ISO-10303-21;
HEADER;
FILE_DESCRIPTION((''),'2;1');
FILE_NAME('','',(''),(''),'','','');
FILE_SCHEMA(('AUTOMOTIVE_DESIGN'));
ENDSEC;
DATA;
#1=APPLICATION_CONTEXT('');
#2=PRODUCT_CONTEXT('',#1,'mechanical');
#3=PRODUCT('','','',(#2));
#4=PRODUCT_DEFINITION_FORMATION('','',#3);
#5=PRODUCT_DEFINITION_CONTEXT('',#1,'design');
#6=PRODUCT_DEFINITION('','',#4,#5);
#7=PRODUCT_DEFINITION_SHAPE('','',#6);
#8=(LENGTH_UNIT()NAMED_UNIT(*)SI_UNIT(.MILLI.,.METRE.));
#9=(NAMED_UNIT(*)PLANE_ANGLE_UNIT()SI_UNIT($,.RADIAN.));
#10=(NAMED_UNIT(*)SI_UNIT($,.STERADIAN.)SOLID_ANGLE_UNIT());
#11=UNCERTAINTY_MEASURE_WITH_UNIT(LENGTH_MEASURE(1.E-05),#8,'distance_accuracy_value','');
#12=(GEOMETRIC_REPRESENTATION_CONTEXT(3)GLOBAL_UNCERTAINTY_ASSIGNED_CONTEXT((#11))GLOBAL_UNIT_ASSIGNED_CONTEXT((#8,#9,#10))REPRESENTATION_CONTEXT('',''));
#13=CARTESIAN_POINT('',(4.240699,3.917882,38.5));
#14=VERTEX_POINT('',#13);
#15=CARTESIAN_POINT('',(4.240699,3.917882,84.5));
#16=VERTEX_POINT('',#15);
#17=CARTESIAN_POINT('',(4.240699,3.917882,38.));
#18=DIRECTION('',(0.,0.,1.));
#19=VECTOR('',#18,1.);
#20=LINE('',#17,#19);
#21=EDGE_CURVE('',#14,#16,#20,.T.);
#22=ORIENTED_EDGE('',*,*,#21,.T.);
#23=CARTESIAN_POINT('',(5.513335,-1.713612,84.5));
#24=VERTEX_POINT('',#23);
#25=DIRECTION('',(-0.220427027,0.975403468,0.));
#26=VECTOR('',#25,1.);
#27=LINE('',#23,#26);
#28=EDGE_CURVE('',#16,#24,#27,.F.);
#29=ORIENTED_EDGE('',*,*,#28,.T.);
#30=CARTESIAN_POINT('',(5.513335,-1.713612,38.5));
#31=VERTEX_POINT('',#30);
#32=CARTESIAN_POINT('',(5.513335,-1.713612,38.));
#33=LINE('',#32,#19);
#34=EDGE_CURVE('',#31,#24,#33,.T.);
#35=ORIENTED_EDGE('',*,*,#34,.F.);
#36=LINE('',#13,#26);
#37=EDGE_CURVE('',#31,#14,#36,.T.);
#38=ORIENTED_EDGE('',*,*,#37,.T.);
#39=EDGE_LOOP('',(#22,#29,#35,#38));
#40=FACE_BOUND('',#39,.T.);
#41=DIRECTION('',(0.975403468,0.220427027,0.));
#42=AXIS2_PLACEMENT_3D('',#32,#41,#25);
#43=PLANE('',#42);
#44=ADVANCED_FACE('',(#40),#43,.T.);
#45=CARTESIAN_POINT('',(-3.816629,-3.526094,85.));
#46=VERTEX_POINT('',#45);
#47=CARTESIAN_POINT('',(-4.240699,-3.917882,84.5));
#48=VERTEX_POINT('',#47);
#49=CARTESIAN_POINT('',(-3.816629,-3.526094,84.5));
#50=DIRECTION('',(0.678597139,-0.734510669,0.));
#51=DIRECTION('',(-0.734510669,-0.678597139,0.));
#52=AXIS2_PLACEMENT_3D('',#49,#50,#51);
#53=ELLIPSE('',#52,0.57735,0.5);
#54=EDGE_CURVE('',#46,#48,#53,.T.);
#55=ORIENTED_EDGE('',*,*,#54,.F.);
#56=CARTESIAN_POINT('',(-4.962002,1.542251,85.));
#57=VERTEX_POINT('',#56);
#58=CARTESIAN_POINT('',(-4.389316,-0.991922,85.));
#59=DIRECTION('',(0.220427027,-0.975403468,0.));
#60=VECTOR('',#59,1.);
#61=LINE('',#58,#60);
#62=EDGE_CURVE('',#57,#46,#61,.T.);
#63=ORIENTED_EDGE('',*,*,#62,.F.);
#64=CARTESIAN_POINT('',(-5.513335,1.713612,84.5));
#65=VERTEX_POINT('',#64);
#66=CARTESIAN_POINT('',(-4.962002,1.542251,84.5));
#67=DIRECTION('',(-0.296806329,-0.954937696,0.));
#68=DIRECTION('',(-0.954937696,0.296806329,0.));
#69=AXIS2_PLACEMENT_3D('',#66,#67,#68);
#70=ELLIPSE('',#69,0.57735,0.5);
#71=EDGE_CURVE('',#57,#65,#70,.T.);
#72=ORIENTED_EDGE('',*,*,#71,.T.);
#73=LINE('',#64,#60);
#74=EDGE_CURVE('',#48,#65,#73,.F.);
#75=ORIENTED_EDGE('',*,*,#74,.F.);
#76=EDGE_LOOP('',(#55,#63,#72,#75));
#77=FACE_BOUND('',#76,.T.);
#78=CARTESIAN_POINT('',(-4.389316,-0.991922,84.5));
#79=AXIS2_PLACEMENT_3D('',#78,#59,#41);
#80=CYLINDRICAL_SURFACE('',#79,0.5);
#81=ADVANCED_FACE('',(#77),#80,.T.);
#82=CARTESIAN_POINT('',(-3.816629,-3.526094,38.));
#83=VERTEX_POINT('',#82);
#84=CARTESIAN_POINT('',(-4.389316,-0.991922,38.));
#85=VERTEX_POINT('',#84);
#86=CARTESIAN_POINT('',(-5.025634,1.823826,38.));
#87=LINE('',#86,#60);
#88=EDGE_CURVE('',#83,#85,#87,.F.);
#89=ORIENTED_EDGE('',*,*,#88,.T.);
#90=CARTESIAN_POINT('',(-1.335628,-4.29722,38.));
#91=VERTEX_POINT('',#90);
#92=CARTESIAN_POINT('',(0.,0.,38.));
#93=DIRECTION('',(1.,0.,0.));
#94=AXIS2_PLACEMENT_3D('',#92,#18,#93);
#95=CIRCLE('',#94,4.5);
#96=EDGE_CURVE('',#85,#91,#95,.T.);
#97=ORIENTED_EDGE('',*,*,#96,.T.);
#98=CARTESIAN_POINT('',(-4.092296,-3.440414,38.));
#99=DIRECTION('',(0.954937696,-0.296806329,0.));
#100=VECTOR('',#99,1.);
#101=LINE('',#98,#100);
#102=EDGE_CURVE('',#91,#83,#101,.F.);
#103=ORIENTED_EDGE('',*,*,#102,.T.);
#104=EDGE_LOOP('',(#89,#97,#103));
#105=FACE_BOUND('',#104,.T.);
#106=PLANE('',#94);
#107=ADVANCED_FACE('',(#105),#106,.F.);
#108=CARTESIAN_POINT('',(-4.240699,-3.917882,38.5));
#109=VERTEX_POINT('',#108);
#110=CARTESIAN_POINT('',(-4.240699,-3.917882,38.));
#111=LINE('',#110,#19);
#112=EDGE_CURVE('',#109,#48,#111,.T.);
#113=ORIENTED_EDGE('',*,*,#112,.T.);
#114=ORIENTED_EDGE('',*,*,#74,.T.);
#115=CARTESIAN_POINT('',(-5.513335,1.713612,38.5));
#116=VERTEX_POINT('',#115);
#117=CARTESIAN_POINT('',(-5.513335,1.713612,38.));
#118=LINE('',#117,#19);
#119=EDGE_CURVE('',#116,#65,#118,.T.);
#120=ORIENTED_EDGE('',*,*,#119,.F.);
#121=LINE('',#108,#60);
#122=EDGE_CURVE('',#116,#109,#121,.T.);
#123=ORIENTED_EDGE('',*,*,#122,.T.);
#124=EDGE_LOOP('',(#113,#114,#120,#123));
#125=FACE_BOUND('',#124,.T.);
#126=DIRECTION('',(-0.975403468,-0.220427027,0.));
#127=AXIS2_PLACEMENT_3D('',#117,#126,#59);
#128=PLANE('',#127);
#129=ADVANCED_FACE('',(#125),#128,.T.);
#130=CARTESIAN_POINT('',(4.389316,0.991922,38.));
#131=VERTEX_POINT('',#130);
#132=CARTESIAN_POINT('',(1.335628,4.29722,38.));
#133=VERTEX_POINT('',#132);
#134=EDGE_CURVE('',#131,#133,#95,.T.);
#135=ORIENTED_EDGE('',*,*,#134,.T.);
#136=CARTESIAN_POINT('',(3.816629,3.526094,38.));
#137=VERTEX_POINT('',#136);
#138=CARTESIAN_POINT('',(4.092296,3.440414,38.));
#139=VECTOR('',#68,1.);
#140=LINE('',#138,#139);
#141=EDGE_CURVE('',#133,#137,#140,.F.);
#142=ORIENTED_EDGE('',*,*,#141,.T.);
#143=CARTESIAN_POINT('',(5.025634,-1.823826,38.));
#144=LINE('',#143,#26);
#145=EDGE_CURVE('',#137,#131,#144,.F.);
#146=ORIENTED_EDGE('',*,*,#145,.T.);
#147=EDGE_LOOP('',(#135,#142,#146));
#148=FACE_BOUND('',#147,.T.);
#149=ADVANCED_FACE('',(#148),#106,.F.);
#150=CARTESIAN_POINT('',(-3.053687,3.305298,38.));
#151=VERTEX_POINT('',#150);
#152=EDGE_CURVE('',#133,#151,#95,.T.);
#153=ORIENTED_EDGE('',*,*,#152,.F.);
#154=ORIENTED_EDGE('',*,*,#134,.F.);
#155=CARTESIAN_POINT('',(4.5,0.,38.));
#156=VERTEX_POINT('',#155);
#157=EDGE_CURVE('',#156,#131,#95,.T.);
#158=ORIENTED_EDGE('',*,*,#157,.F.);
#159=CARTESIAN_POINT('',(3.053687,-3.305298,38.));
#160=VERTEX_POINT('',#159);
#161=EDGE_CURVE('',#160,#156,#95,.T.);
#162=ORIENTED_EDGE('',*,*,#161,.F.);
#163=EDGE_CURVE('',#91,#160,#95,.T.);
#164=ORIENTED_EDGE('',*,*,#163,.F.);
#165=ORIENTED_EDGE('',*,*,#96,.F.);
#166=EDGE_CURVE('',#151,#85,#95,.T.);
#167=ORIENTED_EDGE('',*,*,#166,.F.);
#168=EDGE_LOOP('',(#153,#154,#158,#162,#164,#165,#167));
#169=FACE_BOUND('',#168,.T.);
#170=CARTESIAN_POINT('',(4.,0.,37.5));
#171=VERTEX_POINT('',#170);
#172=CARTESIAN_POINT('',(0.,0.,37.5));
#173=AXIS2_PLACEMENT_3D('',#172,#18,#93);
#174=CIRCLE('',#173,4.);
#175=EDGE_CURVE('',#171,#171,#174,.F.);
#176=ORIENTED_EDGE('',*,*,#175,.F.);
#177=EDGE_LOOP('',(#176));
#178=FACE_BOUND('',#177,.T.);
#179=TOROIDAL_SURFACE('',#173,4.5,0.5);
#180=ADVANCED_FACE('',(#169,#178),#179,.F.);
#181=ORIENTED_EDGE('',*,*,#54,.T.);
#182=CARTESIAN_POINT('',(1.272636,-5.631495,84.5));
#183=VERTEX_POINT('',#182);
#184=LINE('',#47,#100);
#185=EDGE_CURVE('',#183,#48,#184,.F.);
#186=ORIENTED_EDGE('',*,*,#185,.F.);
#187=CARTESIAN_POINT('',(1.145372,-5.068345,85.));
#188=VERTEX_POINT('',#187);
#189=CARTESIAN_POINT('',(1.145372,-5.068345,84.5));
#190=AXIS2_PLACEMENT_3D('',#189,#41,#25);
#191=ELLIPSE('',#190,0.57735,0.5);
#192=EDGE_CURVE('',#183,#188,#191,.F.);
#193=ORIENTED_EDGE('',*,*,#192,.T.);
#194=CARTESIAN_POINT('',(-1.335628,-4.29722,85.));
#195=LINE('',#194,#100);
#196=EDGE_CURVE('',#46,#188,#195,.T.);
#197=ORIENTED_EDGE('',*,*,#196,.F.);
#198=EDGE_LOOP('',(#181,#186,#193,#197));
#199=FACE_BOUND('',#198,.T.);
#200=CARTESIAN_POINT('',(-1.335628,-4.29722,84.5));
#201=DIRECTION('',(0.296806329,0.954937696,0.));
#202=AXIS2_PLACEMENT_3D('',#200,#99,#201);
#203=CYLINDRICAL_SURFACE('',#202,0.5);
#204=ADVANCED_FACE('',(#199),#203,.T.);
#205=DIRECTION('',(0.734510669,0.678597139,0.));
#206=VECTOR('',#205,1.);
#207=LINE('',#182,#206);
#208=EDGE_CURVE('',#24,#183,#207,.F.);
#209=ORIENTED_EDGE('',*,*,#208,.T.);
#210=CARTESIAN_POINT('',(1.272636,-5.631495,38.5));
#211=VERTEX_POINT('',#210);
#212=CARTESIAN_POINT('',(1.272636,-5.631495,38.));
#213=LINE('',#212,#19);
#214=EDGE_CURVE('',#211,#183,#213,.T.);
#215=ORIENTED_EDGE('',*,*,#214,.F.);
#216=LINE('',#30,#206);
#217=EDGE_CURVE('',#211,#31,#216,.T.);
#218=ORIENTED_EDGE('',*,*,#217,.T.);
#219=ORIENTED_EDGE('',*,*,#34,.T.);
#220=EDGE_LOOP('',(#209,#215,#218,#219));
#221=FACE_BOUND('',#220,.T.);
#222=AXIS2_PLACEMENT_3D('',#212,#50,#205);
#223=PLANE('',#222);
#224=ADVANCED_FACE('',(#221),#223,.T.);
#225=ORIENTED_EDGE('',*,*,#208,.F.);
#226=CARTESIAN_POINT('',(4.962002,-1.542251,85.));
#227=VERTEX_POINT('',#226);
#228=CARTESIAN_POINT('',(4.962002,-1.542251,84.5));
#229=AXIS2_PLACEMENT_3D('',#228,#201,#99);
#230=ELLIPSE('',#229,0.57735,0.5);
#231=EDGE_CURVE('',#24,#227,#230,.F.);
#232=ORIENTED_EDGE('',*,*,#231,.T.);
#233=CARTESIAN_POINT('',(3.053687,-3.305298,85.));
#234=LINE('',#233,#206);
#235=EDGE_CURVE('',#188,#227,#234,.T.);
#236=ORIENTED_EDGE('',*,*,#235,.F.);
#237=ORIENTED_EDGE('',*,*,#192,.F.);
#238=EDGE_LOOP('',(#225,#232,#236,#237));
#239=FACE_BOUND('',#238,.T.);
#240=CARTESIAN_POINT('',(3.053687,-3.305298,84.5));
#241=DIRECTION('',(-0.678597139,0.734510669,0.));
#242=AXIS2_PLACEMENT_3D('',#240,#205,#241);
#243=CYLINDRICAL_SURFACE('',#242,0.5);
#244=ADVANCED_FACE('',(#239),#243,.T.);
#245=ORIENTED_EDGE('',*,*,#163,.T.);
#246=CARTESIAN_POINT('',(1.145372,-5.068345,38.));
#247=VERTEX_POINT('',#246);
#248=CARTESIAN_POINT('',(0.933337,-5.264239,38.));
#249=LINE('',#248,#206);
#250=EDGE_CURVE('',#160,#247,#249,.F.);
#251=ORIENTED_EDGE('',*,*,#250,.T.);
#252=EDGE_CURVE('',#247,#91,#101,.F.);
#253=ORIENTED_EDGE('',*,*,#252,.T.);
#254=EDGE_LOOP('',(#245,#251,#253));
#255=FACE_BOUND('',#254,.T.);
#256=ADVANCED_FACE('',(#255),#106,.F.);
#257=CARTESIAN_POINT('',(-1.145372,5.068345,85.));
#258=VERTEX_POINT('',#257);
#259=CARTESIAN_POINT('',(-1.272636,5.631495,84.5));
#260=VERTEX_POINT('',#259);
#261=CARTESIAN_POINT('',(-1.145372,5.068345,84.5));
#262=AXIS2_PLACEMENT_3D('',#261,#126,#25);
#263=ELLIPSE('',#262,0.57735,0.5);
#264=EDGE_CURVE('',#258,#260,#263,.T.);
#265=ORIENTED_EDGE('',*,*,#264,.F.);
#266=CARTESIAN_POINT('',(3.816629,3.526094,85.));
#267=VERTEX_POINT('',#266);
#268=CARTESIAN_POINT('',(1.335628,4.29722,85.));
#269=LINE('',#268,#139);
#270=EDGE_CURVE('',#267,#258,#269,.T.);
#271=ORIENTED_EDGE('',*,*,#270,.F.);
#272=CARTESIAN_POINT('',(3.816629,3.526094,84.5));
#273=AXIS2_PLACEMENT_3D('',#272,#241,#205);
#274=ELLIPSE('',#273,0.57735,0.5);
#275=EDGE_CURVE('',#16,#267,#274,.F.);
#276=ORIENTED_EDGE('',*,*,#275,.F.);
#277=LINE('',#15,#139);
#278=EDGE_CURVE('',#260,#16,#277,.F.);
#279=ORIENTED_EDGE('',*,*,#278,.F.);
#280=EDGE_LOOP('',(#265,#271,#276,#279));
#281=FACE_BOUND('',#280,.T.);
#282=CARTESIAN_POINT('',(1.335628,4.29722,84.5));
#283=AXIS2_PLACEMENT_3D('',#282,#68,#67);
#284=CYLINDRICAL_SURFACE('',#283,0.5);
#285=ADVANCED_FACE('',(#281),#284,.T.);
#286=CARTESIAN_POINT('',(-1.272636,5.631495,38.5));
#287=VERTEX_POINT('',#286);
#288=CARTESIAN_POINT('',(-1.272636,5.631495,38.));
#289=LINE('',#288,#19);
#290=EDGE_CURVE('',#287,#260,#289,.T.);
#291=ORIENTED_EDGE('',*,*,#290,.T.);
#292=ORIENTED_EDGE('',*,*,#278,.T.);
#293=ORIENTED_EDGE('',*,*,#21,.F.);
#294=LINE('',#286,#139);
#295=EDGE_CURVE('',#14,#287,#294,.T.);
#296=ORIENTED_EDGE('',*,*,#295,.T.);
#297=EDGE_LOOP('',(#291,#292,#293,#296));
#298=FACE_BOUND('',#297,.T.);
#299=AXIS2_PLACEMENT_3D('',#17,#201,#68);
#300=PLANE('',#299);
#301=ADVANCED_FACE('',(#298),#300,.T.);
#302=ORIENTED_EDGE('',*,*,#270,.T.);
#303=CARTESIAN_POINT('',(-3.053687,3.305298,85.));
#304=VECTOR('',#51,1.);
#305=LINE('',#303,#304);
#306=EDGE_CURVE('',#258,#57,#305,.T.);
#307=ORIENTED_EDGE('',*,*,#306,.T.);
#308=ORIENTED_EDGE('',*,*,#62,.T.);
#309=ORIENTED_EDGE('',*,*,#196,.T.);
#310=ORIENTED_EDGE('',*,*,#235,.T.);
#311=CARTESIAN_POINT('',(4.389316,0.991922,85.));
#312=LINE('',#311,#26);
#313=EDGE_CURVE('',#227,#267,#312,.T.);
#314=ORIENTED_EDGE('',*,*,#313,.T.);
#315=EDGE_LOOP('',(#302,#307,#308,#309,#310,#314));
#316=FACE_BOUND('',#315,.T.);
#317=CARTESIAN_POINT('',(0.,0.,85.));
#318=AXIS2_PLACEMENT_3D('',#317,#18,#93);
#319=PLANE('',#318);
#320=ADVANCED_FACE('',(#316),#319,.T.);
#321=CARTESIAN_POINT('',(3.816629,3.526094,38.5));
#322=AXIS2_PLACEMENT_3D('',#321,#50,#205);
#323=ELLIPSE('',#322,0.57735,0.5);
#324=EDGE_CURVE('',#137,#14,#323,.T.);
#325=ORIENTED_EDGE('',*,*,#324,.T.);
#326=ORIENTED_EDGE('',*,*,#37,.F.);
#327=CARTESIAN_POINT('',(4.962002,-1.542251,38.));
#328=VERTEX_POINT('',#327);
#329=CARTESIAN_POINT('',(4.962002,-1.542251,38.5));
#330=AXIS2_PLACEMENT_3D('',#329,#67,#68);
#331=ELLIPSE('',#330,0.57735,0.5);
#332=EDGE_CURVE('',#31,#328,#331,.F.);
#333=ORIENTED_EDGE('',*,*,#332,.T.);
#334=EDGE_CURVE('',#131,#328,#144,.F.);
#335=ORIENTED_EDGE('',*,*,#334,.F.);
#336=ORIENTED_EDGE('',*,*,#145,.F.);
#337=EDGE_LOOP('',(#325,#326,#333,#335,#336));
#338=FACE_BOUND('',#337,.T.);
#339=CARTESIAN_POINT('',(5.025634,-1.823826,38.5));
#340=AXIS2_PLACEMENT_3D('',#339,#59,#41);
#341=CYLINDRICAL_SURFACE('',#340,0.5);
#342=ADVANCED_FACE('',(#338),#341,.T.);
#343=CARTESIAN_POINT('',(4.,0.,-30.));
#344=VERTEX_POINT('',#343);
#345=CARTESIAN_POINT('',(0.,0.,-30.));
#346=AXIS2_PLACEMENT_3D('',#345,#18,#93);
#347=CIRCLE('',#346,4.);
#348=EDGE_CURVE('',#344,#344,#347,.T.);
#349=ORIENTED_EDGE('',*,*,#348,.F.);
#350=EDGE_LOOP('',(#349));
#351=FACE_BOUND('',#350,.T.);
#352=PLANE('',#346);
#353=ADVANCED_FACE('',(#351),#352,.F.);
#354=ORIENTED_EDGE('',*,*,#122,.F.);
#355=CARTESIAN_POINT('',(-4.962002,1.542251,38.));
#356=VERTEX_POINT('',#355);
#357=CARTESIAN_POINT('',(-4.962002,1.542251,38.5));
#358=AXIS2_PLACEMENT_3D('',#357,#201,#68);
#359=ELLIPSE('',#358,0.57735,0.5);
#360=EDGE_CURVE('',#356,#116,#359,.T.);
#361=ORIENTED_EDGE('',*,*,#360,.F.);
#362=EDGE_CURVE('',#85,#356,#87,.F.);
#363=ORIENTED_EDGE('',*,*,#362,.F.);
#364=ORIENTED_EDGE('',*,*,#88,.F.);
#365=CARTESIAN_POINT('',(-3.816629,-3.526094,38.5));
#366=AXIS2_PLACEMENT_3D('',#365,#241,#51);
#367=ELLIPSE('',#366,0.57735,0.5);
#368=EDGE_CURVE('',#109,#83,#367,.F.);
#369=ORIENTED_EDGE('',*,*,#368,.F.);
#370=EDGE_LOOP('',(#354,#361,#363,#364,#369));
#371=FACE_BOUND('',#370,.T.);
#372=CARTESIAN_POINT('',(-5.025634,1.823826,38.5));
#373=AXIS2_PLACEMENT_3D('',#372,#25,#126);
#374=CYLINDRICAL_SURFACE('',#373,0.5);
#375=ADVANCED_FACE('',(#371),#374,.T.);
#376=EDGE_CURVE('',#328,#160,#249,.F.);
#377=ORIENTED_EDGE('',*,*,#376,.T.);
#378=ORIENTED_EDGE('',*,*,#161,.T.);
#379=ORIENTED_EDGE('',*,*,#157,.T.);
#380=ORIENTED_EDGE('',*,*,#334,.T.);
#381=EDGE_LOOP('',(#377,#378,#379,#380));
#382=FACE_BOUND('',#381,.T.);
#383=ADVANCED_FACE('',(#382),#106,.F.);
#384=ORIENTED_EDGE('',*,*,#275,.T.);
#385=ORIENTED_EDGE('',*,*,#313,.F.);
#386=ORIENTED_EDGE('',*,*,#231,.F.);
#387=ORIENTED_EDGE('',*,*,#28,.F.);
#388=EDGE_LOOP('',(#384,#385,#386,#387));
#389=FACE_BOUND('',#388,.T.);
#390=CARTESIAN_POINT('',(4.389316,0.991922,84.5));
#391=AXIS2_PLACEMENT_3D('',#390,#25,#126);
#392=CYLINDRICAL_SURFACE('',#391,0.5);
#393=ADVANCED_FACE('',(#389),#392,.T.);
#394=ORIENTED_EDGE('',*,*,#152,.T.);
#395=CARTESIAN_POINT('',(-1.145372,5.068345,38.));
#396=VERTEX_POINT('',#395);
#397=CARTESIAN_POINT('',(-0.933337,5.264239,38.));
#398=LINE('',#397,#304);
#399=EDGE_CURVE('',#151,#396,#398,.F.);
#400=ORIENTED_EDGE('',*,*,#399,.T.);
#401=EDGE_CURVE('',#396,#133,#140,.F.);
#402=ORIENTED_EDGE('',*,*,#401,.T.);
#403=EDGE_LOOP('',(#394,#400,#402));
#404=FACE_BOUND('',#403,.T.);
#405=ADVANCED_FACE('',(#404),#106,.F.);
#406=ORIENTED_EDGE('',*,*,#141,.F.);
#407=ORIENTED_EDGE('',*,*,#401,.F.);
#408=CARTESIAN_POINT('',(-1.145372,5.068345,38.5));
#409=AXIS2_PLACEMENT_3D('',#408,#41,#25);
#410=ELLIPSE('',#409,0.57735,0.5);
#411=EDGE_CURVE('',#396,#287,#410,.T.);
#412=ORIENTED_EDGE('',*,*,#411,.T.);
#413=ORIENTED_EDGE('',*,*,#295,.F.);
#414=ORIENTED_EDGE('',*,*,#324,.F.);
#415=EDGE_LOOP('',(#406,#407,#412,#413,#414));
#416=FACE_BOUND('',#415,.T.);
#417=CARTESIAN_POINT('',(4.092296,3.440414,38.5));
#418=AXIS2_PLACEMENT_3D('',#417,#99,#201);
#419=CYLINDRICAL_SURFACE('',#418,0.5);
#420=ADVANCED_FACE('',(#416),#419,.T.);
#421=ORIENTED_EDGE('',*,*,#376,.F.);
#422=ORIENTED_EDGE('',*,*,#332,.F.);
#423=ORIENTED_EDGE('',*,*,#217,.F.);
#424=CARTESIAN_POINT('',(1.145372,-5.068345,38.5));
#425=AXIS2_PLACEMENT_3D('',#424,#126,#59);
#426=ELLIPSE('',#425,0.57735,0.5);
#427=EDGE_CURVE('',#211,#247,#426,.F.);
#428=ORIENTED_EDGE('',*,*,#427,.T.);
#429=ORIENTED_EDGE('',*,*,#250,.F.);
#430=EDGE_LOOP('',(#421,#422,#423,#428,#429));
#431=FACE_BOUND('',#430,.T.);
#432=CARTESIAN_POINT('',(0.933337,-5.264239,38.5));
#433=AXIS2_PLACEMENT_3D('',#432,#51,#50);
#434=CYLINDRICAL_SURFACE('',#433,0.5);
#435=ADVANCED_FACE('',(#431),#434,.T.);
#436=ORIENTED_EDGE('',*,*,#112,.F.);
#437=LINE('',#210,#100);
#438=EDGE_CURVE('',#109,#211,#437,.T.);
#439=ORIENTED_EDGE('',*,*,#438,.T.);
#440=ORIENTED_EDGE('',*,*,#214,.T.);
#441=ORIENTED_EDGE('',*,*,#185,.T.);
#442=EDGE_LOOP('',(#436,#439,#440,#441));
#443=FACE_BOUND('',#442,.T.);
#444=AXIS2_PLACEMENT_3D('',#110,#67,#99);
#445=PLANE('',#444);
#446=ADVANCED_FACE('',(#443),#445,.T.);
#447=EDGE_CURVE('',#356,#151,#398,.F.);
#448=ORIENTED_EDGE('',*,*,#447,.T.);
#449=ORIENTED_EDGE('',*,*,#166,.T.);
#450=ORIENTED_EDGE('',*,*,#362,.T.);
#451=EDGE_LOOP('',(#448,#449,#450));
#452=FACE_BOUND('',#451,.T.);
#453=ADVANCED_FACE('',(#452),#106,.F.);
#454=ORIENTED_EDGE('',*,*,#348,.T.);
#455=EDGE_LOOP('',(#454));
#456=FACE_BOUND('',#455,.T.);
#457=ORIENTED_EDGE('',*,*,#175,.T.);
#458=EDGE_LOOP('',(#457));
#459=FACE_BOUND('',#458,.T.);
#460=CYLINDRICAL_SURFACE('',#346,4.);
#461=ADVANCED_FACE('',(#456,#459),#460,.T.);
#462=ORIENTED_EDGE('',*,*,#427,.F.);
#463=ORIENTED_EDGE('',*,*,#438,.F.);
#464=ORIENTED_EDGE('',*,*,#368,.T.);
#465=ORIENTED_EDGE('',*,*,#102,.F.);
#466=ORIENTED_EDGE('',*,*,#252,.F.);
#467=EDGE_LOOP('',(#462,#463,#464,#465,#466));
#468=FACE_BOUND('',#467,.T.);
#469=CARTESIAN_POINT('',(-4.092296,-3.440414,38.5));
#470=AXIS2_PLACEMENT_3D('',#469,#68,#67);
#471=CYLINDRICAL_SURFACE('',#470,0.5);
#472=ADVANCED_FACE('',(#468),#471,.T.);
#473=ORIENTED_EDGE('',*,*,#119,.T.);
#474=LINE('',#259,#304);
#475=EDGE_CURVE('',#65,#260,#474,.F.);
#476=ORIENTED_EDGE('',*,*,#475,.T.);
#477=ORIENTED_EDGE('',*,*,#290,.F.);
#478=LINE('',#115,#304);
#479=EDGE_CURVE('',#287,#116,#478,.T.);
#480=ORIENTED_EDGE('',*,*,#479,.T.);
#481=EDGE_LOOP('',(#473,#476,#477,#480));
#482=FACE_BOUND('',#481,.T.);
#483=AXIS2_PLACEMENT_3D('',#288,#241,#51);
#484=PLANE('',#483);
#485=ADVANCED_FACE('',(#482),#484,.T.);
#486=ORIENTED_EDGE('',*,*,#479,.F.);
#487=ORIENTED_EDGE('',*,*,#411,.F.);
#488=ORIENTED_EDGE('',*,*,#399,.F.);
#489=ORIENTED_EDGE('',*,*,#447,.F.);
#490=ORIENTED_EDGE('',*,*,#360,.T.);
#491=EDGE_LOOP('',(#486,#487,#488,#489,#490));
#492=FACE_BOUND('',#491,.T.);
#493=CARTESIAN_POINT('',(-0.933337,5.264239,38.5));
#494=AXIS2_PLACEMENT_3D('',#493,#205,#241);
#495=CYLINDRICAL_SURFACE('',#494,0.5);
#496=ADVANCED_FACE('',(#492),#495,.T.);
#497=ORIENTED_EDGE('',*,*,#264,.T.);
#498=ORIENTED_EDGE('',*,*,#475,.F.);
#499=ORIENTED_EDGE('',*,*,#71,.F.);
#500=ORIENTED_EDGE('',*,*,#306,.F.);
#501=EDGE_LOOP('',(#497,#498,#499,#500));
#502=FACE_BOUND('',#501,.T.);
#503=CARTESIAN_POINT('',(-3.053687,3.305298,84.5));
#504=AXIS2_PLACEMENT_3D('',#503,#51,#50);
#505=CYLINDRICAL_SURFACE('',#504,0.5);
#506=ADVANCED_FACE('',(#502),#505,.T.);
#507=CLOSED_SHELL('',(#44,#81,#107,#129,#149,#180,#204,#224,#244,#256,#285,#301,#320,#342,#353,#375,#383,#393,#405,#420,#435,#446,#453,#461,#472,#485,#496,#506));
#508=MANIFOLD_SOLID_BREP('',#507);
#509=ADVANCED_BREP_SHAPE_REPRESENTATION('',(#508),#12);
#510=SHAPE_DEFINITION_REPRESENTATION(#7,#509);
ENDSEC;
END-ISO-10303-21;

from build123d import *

# Parameters (mm, degrees)
BOSS_EXTRUDE1_DEPTH      = 85
BOSS_EXTRUDE1_DEPTH_BACK = 30
SKETCH1_R                = 4
BOSS_EXTRUDE2_DEPTH      = 47
FILLET1_R                = 0.5


with BuildPart() as part:
    # Sketch1 → Boss-Extrude1 (new, two sides: drawn at the far end of the back side and taken through both)
    with BuildSketch(Plane.XY.offset(-BOSS_EXTRUDE1_DEPTH_BACK)):
        Circle(SKETCH1_R)
    extrude(amount=BOSS_EXTRUDE1_DEPTH + BOSS_EXTRUDE1_DEPTH_BACK)

    # Sketch2 → Boss-Extrude2 (add)
    with BuildSketch(Plane.XY.offset(85)):
        Polygon((5.513335358, -1.713612138), (4.240699323, 3.917882411), (-1.272636036, 5.631494549), (-5.513335358, 1.713612138), (-4.240699323, -3.917882411), (1.272636036, -5.631494549), align=None)
    extrude(amount=-BOSS_EXTRUDE2_DEPTH)

    # Fillet1
    fillet1_edges = [part.edges().sort_by_distance(p)[0] for p in [
        (1.484031644, 4.77468848, 38),
        (4.877017341, 1.102135137, 38),
        (3.392985697, -3.672553343, 85),
        (4.877017341, 1.102135137, 85),
        (1.484031644, 4.77468848, 85),
        (-3.392985697, 3.672553343, 85),
        (-4.877017341, -1.102135137, 85),
        (-1.484031644, -4.77468848, 85),
        (-4, 0, 38),
        (3.392985697, -3.672553343, 38),
        (-1.484031644, -4.77468848, 38),
        (-4.877017341, -1.102135137, 38),
        (-3.392985697, 3.672553343, 38),
    ]]
    fillet(fillet1_edges, radius=FILLET1_R - 0.0001)  # a hair under: the kernel refuses the full size


solid = part.part
